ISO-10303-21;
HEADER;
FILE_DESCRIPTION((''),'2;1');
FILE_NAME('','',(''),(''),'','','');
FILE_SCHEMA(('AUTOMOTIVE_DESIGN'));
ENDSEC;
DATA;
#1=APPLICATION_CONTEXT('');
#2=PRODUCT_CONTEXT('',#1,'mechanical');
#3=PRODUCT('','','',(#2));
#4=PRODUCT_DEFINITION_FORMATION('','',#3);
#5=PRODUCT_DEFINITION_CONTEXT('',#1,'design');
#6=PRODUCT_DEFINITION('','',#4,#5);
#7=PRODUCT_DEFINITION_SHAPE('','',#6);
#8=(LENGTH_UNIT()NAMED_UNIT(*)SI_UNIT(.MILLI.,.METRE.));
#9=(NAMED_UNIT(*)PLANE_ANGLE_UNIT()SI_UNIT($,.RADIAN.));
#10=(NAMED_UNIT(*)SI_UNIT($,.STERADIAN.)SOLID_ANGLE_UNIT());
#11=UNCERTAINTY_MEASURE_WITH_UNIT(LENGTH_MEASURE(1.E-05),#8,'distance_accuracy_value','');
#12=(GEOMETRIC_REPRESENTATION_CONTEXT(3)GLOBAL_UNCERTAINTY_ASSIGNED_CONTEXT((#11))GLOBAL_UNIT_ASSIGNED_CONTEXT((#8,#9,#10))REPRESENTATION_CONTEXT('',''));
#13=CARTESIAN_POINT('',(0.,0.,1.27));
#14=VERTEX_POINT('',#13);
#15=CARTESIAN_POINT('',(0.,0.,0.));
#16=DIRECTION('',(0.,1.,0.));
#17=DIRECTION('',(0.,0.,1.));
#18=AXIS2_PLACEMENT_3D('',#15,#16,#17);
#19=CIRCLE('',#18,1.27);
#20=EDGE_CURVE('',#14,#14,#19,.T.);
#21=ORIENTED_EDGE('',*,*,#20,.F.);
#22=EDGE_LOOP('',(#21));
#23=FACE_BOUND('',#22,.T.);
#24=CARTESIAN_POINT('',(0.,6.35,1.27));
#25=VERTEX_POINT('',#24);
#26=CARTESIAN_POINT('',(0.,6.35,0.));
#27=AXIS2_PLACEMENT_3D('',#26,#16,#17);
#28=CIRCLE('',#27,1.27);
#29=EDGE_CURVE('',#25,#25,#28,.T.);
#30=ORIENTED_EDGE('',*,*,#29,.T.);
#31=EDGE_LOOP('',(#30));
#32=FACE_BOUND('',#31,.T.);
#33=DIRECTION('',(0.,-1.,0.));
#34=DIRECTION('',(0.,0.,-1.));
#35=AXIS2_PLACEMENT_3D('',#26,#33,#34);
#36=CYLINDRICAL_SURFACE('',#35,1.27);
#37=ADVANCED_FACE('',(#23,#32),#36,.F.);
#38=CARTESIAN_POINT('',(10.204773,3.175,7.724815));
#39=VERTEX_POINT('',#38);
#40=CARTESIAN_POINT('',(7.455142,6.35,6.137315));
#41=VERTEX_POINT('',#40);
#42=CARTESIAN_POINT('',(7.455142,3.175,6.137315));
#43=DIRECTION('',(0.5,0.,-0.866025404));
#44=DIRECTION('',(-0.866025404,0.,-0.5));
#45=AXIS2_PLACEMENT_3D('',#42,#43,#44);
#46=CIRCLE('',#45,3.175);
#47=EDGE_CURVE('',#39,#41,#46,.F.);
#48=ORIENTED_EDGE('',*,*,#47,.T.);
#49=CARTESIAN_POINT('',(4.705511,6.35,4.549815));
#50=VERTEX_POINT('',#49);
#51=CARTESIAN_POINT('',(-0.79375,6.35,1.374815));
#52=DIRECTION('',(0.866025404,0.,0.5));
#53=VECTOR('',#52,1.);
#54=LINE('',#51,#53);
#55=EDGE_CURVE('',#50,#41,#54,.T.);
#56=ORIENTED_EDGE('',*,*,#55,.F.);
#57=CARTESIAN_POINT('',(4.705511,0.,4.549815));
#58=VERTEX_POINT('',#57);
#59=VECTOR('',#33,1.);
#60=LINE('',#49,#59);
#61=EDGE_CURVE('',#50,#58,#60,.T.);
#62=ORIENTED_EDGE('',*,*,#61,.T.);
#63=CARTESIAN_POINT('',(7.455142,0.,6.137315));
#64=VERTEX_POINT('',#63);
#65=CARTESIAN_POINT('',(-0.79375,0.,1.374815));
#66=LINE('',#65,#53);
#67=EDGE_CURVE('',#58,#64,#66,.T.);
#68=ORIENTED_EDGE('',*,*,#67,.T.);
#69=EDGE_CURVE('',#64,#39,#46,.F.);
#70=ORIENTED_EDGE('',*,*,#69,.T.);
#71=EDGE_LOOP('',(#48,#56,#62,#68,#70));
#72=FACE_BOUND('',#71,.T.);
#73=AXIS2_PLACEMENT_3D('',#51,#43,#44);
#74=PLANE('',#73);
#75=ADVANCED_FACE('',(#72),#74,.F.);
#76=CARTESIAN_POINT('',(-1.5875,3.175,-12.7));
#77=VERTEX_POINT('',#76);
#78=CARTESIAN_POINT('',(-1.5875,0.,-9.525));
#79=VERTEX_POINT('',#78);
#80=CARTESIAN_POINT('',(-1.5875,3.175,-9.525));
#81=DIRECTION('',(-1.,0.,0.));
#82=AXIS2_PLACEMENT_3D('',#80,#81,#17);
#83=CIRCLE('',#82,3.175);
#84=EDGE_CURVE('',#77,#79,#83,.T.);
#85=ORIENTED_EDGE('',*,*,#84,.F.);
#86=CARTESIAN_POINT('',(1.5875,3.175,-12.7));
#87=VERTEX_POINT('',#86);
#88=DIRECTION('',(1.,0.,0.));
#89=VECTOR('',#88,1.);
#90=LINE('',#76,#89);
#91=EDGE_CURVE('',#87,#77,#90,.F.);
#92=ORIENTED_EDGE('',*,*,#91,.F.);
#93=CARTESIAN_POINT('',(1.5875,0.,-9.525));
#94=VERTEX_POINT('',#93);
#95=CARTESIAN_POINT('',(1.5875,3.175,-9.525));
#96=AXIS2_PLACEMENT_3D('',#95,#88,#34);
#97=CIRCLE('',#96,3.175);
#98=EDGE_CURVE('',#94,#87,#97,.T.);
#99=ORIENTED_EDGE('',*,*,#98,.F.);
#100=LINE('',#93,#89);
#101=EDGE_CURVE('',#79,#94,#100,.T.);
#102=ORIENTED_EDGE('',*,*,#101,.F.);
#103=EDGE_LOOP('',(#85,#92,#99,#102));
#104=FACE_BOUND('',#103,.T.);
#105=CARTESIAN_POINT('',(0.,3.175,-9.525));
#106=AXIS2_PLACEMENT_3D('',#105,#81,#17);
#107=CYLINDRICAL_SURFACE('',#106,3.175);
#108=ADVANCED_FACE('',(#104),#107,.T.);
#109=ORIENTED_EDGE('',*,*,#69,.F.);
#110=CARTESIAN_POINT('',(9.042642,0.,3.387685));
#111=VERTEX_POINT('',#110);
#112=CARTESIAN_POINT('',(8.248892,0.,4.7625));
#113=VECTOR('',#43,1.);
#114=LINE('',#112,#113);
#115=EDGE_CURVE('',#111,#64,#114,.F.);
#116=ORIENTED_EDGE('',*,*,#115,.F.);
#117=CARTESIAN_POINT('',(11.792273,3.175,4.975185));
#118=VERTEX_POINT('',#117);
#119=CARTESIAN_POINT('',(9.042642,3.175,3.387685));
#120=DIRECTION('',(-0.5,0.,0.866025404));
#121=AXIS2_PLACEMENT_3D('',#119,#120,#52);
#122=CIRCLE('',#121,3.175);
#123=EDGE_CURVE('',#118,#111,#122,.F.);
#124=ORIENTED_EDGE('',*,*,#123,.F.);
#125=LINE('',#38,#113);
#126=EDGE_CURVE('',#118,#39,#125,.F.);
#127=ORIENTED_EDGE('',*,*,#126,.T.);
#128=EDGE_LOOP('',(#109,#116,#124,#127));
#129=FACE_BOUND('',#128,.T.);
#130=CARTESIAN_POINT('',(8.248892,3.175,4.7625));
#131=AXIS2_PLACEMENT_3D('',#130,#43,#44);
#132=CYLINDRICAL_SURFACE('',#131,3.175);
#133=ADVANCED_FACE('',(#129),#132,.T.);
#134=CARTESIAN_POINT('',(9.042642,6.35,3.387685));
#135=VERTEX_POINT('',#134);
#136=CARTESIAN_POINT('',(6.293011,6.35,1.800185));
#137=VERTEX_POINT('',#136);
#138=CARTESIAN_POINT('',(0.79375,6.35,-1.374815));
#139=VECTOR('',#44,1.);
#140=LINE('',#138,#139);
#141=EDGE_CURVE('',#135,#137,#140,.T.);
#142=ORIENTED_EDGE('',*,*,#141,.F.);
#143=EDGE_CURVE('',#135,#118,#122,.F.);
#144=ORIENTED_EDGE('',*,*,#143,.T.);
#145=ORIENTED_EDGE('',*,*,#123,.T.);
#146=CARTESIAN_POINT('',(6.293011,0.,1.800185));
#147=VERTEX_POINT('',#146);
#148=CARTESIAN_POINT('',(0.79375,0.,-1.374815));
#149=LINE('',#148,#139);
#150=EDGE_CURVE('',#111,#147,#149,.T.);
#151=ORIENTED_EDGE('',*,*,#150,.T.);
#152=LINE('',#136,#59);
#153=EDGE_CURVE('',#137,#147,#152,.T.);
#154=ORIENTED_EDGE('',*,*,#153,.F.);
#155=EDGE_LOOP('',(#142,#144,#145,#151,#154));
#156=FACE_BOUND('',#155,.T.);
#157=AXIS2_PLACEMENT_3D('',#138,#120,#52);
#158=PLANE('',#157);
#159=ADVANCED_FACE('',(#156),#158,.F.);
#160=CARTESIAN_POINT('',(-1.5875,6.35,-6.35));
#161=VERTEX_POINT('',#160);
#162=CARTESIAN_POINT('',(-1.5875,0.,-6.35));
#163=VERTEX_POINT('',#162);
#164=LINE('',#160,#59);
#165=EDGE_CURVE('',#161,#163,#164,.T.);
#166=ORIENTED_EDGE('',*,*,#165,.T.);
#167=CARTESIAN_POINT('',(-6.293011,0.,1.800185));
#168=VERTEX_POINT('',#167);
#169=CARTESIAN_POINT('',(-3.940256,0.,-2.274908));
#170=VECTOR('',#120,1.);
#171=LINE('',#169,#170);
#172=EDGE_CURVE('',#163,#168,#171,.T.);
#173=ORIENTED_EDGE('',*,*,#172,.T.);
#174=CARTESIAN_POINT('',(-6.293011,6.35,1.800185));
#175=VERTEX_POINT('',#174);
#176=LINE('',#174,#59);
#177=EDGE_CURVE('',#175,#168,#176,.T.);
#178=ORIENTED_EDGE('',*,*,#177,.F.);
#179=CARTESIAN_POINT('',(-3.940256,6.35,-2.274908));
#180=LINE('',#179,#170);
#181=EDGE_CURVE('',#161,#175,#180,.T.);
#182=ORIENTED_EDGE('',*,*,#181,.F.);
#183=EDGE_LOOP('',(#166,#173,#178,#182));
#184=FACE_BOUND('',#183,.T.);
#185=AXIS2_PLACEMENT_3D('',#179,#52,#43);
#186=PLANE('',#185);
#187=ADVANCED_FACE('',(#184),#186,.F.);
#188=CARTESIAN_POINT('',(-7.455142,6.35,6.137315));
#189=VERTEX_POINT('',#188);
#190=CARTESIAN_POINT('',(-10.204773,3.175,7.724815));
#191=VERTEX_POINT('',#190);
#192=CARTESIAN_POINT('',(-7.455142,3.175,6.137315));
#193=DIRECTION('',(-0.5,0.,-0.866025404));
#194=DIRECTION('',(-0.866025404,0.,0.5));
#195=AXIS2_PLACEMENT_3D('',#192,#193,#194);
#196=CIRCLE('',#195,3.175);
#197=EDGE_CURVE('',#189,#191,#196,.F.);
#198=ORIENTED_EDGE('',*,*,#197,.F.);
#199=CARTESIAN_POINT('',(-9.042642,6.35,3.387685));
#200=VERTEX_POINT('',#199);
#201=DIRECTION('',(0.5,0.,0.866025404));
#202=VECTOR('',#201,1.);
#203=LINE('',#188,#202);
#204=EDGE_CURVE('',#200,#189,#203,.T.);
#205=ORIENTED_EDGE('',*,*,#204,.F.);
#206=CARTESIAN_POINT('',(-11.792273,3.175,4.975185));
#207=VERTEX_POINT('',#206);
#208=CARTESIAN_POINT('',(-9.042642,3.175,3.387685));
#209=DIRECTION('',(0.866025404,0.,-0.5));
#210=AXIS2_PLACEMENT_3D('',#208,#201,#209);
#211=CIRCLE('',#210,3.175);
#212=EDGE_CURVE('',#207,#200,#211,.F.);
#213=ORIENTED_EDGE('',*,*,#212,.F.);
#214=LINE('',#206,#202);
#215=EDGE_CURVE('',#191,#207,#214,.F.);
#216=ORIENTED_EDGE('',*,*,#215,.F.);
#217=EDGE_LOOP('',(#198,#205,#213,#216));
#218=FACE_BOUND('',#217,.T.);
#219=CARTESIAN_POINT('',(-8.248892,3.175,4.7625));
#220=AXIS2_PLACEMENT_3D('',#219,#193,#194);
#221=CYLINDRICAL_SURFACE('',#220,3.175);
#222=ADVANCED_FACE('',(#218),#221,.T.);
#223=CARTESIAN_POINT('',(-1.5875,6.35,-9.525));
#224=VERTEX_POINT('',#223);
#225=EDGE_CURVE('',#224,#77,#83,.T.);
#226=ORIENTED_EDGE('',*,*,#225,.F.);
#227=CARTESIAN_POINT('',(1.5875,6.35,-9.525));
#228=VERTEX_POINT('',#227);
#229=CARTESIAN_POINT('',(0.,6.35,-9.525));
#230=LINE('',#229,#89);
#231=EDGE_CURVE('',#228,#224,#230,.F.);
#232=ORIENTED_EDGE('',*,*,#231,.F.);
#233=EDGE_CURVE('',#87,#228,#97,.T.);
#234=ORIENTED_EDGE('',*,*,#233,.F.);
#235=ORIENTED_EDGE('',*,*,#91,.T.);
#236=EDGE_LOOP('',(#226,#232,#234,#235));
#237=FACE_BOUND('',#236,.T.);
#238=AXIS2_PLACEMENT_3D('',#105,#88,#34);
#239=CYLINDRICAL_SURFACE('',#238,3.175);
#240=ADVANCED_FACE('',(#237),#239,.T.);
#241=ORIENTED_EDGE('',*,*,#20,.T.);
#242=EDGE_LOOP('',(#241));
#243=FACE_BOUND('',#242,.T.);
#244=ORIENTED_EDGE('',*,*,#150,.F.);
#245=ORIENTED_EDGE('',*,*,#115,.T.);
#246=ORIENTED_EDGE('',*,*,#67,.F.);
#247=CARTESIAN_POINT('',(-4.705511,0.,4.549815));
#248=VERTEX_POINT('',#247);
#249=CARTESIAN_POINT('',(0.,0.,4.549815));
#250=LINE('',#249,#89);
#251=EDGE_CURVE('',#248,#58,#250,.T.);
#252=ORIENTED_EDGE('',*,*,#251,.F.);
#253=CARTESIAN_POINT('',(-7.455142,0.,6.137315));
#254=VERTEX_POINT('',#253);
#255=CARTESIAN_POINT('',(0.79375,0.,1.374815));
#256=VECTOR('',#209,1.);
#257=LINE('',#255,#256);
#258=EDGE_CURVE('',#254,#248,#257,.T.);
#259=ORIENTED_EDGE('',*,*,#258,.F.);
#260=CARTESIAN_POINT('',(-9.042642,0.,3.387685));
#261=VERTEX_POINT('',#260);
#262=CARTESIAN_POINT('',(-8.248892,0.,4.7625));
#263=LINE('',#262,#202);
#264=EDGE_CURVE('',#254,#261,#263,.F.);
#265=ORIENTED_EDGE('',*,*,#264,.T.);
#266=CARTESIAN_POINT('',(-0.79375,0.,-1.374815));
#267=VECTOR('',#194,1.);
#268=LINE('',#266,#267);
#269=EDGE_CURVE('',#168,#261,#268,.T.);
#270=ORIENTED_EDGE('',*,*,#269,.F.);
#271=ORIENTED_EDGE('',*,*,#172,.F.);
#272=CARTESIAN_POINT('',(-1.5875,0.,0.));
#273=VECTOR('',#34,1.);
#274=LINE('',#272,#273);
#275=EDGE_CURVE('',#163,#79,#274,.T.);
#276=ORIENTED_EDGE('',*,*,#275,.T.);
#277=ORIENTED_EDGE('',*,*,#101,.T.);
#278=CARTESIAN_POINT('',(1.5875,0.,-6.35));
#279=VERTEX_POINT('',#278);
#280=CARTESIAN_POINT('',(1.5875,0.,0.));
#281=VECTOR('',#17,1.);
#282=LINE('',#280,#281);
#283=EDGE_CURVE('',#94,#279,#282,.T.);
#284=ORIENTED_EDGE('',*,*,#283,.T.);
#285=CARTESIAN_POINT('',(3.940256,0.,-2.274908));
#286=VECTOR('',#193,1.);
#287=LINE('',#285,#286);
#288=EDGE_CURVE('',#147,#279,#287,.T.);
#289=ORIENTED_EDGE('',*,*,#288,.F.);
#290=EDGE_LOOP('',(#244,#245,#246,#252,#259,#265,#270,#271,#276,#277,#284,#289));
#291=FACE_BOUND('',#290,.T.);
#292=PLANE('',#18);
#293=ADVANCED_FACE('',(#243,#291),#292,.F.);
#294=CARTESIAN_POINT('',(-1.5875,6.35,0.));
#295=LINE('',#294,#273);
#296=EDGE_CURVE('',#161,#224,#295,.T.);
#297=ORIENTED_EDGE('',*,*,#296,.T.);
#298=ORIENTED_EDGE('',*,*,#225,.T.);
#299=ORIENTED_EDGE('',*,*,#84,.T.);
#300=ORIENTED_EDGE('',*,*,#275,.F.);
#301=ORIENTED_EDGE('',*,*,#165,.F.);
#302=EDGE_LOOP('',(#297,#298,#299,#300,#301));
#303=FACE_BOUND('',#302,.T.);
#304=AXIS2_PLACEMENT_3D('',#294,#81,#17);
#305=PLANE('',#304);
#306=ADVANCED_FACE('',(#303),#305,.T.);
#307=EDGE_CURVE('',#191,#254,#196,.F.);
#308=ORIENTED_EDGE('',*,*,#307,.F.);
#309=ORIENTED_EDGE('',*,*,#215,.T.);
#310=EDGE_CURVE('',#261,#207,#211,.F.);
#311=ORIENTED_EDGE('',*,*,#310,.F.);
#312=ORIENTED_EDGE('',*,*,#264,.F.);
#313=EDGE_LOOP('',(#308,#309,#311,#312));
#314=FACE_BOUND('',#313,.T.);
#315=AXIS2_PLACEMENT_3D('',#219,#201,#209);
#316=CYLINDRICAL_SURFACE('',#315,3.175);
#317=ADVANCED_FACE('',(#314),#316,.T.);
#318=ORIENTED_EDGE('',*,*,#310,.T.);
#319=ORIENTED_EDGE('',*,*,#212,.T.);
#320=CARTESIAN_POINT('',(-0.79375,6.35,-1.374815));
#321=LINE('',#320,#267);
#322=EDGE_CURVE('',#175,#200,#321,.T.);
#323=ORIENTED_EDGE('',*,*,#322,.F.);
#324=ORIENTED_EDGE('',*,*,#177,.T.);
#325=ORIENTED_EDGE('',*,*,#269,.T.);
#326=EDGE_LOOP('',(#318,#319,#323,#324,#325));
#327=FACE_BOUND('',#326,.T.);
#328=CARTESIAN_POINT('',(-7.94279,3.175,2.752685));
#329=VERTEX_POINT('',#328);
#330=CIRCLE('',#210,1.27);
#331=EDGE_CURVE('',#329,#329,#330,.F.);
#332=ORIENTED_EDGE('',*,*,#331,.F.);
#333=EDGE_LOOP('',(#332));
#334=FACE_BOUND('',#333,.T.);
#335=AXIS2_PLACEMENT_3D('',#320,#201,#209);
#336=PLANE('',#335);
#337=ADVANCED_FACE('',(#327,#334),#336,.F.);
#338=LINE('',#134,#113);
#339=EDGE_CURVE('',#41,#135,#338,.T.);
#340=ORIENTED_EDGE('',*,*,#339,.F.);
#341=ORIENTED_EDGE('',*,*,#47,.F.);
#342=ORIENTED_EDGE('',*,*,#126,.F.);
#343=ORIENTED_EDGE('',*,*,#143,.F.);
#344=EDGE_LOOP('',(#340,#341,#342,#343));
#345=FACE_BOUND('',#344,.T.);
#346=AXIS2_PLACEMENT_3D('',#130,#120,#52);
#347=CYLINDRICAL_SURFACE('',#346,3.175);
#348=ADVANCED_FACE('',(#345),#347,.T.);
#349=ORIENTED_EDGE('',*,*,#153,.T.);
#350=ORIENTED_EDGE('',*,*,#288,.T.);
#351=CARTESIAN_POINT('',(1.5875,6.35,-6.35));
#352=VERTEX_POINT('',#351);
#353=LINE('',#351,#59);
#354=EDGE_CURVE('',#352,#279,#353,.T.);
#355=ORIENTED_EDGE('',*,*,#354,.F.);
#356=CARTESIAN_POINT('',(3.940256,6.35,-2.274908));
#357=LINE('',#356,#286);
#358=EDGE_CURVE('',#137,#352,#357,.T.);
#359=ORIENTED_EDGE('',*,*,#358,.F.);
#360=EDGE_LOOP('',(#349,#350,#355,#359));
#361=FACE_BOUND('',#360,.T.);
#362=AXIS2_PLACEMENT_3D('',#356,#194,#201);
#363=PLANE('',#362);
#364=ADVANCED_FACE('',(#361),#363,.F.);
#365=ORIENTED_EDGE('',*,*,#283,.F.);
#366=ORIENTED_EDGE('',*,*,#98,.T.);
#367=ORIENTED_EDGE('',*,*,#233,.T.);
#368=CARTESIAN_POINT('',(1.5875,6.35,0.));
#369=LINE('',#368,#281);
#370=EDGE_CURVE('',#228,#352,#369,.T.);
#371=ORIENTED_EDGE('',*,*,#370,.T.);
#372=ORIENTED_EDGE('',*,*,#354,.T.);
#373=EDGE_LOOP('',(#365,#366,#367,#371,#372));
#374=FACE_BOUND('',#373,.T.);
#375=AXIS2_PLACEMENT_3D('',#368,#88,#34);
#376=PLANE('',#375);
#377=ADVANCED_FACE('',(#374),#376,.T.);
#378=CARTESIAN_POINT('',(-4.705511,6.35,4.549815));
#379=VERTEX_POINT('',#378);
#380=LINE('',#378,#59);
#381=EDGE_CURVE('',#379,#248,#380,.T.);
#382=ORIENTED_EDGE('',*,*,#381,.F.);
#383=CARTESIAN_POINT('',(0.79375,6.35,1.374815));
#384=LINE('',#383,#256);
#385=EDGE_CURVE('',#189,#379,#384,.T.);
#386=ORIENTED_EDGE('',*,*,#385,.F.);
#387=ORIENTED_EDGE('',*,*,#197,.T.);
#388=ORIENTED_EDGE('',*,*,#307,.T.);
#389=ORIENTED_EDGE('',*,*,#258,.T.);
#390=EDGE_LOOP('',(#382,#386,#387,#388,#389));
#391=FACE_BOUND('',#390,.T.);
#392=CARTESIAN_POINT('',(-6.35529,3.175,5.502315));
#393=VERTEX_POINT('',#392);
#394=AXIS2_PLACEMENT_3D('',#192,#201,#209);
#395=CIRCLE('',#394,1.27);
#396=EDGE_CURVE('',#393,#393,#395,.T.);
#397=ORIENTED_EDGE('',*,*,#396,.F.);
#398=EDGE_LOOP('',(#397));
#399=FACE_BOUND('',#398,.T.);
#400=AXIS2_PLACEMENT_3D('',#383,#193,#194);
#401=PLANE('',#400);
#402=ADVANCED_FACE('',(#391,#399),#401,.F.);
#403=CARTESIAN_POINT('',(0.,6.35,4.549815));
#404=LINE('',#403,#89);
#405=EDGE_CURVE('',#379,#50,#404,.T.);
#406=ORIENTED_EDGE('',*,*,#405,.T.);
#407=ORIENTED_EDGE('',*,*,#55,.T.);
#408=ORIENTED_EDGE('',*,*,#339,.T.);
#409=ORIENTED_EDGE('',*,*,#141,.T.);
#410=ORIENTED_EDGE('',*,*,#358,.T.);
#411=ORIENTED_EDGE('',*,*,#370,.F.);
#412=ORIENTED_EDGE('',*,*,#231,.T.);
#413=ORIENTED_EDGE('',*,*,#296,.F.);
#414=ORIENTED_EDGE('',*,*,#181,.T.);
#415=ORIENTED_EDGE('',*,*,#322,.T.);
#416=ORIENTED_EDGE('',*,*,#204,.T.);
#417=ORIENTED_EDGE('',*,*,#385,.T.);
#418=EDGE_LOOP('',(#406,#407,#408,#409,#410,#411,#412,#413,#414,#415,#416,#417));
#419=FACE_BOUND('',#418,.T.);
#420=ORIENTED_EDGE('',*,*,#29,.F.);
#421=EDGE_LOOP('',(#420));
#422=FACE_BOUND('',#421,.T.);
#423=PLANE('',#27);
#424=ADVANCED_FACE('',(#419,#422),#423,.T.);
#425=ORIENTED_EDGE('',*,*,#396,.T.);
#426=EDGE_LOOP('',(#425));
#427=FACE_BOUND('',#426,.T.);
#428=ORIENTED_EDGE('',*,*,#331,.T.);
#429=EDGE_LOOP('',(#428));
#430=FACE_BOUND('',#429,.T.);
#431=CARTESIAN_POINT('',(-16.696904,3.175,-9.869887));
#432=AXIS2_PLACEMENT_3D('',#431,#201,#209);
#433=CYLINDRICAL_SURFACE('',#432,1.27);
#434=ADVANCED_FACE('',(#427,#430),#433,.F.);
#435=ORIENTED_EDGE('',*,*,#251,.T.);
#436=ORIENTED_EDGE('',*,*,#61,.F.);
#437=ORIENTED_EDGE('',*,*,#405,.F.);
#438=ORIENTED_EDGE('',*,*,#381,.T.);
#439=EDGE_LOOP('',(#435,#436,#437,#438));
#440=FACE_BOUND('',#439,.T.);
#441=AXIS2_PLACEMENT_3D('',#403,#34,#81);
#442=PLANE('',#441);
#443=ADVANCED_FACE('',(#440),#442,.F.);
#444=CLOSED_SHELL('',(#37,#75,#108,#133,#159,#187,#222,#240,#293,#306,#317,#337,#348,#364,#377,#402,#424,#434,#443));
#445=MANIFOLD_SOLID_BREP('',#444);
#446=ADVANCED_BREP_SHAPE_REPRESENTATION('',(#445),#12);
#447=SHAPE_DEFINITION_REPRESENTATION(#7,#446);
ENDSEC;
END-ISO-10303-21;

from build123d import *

# Parameters (mm, degrees)
SKETCH1_R           = 1.27
SKETCH1_W           = 3.175
SKETCH1_H           = 6.35
BOSS_EXTRUDE1_DEPTH = 6.35
CUT_EXTRUDE1_REACH  = 21.921
SKETCH2_R           = 1.27
FILLET1_R           = 3.175


with BuildPart() as part:
    # Sketch1 → Boss-Extrude1 (new body)
    # profile 1 of 4: a face of its own
    with BuildSketch(Plane(origin=(0, 0, 0), x_dir=(1, 0, 0), z_dir=(0, 1, 0))):
        Polygon((4.705511314, -4.549815329), (6.293011314, -1.800184671), (1.5875, 6.35), (-1.5875, 6.35), (-6.293011314, -1.800184671), (-4.705511314, -4.549815329), align=None)
        with Locations(Location((0, 0, 0), (0, 0, 270))):
            Circle(SKETCH1_R, mode=Mode.SUBTRACT)
    # profile 2 of 4: a face of its own
    with BuildSketch(Plane(origin=(0, 0, 0), x_dir=(1, 0, 0), z_dir=(0, 1, 0))):
        Polygon((-11.792272628, -4.975184671), (-10.204772628, -7.724815329), (-4.705511314, -4.549815329), (-6.293011314, -1.800184671), align=None)
    # profile 3 of 4: a face of its own
    with BuildSketch(Plane(origin=(0, 0, 0), x_dir=(1, 0, 0), z_dir=(0, 1, 0))):
        Polygon((10.204772628, -7.724815329), (11.792272628, -4.975184671), (6.293011314, -1.800184671), (4.705511314, -4.549815329), align=None)
    # profile 4 of 4: a face of its own
    with BuildSketch(Plane(origin=(0, 0, 0), x_dir=(1, 0, 0), z_dir=(0, 1, 0))):
        with Locations((0, 9.525)):
            Rectangle(SKETCH1_W, SKETCH1_H)
    extrude(amount=BOSS_EXTRUDE1_DEPTH)

    # Sketch2 → Cut-Extrude1 (cut, up to next)
    with BuildSketch(Plane(origin=(0.79375, 0, 1.374815329), x_dir=(0.8660254037844384, 0, -0.5000000000000006), z_dir=(0.5000000000000006, 0, 0.8660254037844384)), mode=Mode.PRIVATE) as cut_extrude1_sk1:
        with Locations((-9.525, 3.175)):
            Circle(SKETCH2_R)
    cut_extrude1_tool1 = extrude(cut_extrude1_sk1.sketch, amount=-CUT_EXTRUDE1_REACH, mode=Mode.PRIVATE) & part.part
    add(cut_extrude1_tool1.solids().sort_by_distance((-7.455142, 3.175, 6.137315))[0], mode=Mode.SUBTRACT)

    # Fillet1
    fillet1_edges = [part.edges().sort_by_distance(p)[0] for p in [
        (0, 0, -12.7),
        (0, 6.35, -12.7),
        (10.998522628, 0, 6.35),
        (10.998522628, 6.35, 6.35),
        (-10.998522628, 0, 6.35),
        (-10.998522628, 6.35, 6.35),
    ]]
    fillet(fillet1_edges, radius=FILLET1_R - 0.0001)  # a hair under: the kernel refuses the full size


solid = part.part
